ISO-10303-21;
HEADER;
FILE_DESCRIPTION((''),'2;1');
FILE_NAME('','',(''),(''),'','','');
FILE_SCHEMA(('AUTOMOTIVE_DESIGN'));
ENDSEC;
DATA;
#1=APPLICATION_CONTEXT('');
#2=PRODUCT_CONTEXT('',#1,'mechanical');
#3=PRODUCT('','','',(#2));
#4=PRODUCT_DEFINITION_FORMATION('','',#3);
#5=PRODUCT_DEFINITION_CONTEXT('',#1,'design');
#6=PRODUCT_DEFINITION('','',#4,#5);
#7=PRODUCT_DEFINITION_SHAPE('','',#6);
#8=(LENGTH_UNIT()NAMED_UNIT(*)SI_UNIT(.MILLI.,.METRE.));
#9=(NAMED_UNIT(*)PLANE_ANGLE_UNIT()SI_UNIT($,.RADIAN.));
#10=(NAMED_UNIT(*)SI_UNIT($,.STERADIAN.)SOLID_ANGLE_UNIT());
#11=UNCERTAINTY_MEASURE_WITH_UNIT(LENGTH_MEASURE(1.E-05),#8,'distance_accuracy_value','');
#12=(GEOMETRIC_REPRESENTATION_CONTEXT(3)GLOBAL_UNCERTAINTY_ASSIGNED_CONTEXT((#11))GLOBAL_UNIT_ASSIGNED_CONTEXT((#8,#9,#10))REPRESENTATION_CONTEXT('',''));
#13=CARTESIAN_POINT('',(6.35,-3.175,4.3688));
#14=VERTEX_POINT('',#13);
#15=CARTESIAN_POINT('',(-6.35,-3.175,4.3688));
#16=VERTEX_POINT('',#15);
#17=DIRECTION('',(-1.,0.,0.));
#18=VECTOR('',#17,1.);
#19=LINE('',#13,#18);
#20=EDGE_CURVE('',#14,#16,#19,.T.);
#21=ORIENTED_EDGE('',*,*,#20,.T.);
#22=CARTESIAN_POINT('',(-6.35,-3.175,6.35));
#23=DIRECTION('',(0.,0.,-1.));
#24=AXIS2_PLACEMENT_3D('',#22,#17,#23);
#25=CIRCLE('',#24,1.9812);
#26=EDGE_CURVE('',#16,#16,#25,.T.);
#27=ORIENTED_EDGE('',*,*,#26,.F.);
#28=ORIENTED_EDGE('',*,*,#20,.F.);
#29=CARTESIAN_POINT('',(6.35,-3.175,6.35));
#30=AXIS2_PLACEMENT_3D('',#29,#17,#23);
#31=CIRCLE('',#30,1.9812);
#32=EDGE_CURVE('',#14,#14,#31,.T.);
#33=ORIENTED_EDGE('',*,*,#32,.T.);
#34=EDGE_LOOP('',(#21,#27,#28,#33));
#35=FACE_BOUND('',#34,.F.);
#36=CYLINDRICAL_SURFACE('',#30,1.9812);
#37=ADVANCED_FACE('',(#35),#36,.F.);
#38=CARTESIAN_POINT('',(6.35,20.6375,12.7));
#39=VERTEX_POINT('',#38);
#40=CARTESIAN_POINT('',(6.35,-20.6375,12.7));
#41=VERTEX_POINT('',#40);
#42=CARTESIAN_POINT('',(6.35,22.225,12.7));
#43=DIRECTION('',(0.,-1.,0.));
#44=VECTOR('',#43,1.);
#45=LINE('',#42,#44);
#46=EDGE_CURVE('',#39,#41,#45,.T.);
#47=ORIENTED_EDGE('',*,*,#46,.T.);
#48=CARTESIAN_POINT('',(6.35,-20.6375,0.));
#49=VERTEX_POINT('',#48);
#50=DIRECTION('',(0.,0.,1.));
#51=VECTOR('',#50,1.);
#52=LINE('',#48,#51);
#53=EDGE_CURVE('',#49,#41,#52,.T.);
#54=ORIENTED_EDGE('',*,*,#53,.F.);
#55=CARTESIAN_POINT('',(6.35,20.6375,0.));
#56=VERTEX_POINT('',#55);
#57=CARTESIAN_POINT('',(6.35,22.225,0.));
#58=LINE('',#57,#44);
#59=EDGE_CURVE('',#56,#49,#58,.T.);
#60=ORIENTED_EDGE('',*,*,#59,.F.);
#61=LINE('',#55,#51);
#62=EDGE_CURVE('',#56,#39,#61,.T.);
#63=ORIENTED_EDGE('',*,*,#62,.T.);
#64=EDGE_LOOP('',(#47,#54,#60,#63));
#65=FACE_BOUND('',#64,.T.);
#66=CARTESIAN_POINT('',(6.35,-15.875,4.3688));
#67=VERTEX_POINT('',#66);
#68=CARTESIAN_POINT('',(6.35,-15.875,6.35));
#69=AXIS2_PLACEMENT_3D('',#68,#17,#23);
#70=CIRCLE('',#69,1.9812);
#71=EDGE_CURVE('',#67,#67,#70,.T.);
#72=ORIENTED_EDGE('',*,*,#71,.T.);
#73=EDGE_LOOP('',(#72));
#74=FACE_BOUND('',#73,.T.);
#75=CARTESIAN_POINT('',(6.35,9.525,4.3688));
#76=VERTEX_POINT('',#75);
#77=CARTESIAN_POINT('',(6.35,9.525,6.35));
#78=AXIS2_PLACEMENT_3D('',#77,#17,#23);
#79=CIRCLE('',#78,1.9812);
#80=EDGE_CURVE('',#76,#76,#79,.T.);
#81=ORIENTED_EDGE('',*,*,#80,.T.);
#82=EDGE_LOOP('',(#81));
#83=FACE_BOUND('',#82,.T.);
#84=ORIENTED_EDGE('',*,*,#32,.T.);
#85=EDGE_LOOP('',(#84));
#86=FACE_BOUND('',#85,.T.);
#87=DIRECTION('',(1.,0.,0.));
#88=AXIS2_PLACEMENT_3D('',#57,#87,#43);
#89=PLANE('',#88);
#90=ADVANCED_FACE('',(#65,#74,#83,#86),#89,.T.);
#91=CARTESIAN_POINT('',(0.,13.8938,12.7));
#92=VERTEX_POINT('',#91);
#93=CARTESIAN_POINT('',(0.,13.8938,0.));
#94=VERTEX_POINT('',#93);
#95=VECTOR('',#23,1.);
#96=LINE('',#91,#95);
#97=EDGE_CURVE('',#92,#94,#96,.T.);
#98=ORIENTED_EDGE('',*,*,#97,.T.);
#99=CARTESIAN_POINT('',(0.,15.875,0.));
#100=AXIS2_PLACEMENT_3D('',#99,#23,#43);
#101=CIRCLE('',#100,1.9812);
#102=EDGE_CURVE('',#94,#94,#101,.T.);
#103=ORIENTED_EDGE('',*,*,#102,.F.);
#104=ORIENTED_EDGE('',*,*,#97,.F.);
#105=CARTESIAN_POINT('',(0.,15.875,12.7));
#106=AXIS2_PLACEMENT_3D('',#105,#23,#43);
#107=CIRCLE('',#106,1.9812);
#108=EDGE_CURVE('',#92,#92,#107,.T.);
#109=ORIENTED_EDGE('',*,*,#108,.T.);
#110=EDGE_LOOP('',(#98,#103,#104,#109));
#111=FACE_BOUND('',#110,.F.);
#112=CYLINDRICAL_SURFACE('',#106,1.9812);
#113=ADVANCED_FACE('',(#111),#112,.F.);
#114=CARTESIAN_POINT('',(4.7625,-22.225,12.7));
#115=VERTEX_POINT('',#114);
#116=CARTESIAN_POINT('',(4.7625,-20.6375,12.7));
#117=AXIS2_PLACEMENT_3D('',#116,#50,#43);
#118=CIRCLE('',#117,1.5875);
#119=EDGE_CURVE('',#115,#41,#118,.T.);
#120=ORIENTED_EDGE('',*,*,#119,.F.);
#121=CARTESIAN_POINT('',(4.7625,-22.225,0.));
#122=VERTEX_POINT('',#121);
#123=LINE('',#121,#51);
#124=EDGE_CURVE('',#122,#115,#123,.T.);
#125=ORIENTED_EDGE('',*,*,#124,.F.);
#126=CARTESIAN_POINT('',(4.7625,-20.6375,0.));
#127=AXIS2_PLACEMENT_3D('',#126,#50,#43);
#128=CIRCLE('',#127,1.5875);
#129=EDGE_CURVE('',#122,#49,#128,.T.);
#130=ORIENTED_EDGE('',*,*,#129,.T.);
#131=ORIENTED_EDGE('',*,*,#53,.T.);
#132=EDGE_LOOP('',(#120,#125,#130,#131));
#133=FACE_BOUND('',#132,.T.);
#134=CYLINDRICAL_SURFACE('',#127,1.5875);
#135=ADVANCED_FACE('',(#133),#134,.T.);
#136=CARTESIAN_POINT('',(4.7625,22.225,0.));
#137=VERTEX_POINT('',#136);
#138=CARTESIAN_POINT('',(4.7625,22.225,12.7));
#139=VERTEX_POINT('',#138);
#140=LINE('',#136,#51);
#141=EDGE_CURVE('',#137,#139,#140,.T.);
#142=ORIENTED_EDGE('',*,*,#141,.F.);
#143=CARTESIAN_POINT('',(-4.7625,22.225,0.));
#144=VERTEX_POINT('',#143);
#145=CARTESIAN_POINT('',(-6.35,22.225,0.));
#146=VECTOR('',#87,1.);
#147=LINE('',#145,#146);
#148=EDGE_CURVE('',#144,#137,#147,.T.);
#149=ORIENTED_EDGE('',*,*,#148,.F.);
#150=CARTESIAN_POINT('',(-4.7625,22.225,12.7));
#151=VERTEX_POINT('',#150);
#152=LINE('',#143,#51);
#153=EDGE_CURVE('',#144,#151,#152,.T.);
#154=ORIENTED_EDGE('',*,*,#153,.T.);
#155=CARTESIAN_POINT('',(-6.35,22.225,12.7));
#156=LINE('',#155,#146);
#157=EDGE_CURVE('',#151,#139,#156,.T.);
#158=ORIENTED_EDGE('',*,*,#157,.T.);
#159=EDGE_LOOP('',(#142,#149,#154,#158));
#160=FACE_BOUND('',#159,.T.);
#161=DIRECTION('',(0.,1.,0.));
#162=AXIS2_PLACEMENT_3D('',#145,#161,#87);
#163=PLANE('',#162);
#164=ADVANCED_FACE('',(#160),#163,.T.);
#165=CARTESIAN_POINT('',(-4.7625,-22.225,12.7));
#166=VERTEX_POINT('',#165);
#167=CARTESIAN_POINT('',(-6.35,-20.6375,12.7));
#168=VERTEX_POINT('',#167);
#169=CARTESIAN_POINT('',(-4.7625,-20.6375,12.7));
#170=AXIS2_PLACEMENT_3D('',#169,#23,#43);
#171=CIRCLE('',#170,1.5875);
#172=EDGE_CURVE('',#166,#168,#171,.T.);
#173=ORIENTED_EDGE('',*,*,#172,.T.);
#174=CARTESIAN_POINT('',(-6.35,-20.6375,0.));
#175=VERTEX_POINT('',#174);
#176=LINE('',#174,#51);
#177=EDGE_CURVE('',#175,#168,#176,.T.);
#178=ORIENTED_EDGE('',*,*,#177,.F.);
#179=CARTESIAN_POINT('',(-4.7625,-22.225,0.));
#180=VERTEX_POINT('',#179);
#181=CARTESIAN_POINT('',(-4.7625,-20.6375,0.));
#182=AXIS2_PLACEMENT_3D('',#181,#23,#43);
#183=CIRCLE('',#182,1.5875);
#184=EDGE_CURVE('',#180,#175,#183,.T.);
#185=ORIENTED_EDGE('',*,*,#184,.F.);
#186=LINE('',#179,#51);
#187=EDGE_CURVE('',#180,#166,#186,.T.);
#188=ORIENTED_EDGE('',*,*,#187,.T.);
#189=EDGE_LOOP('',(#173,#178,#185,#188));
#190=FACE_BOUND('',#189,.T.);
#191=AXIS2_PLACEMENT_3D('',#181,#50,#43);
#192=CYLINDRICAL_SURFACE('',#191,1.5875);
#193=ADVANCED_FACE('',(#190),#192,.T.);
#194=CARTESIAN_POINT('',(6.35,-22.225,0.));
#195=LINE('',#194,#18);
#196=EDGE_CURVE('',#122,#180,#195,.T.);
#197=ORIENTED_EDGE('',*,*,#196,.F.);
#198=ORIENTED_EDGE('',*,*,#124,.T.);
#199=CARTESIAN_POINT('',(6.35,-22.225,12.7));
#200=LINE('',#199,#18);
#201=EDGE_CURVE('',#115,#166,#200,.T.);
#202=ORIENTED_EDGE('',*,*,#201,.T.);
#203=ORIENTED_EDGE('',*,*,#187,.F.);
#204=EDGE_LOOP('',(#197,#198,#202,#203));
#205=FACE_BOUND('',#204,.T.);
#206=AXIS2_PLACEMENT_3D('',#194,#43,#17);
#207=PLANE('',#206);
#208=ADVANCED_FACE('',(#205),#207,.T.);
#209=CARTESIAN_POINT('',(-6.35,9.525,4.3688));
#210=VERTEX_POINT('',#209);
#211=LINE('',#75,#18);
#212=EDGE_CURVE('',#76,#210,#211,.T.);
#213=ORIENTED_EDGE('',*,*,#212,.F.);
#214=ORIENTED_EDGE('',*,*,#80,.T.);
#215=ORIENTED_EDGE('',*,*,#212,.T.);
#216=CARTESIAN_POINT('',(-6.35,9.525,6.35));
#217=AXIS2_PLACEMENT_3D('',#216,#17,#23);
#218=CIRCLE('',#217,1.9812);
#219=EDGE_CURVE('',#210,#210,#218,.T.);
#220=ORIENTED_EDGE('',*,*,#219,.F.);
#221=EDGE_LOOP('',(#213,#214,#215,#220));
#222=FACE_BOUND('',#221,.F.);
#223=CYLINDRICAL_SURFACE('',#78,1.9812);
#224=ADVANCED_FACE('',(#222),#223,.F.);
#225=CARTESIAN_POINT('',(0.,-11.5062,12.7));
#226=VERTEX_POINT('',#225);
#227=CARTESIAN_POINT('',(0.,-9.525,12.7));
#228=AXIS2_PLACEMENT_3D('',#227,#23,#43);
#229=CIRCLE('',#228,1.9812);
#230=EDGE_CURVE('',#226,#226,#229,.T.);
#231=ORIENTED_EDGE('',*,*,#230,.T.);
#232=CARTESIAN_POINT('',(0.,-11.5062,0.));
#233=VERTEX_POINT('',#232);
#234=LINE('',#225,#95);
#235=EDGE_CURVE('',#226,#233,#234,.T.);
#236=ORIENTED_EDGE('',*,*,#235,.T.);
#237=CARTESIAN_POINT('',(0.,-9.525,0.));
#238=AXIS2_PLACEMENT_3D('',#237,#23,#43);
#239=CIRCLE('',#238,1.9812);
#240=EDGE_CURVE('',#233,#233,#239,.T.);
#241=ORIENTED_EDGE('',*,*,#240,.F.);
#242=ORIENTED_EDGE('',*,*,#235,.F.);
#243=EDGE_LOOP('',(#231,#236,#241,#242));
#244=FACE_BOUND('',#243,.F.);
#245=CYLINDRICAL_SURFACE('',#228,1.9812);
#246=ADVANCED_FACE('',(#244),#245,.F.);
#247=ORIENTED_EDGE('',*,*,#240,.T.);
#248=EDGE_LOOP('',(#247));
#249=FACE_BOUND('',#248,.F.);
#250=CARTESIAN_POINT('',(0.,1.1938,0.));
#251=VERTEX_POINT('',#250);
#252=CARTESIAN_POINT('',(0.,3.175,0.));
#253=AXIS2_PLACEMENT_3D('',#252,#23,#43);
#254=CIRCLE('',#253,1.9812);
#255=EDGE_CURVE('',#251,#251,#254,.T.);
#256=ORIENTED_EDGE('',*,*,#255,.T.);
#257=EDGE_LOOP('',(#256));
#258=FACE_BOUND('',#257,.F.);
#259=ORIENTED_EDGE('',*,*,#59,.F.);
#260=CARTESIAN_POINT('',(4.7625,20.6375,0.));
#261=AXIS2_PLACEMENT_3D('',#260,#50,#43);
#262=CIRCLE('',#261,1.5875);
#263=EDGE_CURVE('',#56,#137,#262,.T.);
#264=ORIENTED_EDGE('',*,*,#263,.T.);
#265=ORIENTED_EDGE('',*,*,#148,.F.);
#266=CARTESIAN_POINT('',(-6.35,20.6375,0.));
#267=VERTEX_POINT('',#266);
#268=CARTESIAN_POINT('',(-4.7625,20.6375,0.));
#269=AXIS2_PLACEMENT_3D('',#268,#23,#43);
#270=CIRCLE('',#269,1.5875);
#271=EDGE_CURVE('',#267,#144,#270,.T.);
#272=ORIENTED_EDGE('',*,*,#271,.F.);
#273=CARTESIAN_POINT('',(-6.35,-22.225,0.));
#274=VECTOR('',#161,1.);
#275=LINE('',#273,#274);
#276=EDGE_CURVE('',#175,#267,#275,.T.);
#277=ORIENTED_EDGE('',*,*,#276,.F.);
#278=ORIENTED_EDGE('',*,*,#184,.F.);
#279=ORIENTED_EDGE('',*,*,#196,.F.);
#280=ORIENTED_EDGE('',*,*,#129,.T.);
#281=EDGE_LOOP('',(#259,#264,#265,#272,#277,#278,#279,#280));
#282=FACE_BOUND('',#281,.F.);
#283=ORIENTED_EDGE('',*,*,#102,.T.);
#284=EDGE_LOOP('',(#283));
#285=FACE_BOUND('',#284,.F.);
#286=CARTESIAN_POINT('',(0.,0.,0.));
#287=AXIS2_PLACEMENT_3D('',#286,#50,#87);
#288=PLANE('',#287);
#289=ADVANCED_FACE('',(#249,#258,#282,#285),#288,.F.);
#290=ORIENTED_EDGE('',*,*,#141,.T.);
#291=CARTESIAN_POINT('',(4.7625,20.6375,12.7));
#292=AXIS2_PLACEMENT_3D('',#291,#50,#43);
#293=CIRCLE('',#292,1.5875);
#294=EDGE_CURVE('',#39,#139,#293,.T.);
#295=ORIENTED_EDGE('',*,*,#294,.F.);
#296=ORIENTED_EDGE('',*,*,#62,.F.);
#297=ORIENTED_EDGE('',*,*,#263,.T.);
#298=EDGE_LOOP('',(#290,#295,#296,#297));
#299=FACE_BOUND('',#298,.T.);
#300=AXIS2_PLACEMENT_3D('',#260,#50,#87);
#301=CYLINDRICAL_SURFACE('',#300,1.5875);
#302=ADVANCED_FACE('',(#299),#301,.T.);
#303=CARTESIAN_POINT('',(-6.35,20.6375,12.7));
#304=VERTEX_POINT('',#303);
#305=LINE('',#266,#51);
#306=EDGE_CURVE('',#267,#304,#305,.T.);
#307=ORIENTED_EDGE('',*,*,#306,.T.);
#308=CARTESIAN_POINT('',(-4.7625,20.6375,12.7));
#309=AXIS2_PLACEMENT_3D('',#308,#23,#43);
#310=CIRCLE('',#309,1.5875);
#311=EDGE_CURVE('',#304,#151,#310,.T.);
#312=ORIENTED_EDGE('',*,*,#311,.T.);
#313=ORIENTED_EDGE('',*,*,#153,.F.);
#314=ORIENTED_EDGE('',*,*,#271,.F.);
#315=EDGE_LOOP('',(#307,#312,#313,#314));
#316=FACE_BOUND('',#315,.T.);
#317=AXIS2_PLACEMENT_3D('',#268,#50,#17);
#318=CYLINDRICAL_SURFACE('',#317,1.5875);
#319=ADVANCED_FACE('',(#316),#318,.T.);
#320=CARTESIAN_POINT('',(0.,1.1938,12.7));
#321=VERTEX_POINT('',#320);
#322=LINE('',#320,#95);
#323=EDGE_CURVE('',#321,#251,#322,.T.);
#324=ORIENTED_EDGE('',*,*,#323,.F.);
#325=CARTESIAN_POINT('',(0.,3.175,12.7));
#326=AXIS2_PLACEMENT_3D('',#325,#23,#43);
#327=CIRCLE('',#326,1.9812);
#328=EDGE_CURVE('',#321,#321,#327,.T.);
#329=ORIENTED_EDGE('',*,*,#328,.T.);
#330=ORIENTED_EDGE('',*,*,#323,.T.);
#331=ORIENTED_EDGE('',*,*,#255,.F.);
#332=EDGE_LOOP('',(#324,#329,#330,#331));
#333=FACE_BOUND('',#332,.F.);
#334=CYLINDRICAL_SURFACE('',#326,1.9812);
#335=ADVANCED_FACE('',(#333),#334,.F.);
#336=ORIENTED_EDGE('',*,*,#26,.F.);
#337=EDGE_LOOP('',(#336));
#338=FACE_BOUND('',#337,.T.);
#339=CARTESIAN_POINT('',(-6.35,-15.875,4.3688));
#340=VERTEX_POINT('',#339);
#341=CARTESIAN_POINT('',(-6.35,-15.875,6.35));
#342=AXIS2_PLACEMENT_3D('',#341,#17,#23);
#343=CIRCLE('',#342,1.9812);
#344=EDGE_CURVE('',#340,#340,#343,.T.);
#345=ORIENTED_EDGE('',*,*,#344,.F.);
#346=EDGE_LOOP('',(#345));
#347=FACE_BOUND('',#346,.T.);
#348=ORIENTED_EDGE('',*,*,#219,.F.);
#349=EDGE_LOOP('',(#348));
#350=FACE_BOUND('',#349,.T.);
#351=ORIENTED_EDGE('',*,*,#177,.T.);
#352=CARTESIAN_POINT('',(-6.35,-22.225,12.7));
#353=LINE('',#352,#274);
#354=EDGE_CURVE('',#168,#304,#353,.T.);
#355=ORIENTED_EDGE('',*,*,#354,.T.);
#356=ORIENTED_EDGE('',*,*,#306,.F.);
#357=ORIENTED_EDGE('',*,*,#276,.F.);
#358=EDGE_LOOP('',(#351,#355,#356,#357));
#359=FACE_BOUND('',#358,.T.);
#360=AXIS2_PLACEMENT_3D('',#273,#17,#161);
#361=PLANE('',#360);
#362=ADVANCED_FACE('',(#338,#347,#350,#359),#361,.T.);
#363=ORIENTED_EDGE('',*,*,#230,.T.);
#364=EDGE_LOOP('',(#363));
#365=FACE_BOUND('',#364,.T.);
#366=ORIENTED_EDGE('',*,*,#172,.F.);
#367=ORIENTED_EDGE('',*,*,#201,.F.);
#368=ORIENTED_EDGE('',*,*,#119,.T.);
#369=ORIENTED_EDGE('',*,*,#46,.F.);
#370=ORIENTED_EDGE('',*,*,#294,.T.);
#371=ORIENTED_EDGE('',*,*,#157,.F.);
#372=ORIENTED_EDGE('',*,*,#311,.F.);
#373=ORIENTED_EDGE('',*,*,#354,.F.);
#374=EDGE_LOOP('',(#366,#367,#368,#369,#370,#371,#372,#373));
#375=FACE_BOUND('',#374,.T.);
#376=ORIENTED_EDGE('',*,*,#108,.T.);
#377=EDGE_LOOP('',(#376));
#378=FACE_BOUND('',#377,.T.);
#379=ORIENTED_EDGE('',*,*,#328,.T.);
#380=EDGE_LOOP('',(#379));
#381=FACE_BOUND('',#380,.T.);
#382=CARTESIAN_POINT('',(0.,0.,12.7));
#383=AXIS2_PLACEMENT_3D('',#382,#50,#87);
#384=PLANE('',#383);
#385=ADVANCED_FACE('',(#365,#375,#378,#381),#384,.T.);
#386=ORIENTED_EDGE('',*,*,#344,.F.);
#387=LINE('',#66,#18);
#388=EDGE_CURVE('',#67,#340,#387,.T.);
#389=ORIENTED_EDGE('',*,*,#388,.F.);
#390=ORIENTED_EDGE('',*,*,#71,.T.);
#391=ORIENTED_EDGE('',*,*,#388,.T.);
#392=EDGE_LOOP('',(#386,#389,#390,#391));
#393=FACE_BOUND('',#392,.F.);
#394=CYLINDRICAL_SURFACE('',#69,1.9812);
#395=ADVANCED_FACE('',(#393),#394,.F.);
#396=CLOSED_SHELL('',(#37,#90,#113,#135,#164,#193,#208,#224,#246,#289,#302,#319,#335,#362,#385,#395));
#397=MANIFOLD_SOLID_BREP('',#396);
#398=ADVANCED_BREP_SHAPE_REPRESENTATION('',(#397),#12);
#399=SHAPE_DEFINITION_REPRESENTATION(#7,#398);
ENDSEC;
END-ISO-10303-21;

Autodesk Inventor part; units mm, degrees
ref_plane "YZ Plane" through (0, 0, 0) normal (1, 0, 0) x (0, 1, 0)
ref_plane "XZ Plane" through (0, 0, 0) normal (0, 1, 0) x (-1, 0, 0)
ref_plane "XY Plane" through (0, 0, 0) normal (0, 0, 1) x (1, 0, 0)
sketch "Sketch1" plane through (0, 0, 0) normal (0, 0, 1) x (1, 0, 0)
  line L0 (6.35, -22.225) -> (-6.35, -22.225)
  line L1 (-6.35, -22.225) -> (-6.35, 22.225)
  line L2 (-6.35, 22.225) -> (6.35, 22.225)
  line L3 (6.35, 22.225) -> (6.35, -22.225)
  line L4 (6.35, -22.225) -> (-6.35, 22.225) construction
  line L5 (-6.35, -22.225) -> (6.35, 22.225) construction
  point P0 (0, 0)
  dimension "d0" = 12.7
  dimension "d6" = 44.45
extrude "Plate1" add sketch "Sketch1" along normal blind 12.7
sketch "Sketch2" plane through (6.35, -22.225, 0) normal (1, 0, 0) x (0, 0, -1)
  line L0 (0, 0) -> (-12.7, 0) projected
  line L1 (0, 0) -> (0, 44.45) projected
  point P0 (0, 22.225)
  point P1 (-6.35, 6.35)
  point P2 (-6.35, 19.05)
  point P3 (-6.35, 31.75)
  dimension "d2" = 6.35
  dimension "d3" = 12.7
  dimension "d4" = 12.7
  dimension "d5" = 6.35
hole "Hole1" at (6.35, -15.875, 6.35) at (6.35, -3.175, 6.35) at (6.35, 9.525, 6.35) direction (-1, 0, 0) diameter 3.9624 depth 12.7 tip angle 118 thread size "10-32 UNF" class "2B" standard "ANSI Unified Screw Threads"
sketch "Sketch3" plane through (0, 0, 12.7) normal (0, 0, 1) x (1, 0, 0)
  line L0 (-6.35, 22.225) -> (6.35, 22.225) projected
  point P0 (0, 0)
  point P1 (0, -9.525)
  point P2 (0, 3.175)
  point P3 (0, 15.875)
  dimension "d14" = 12.7
  dimension "d15" = 12.7
  dimension "d16" = 6.35
hole "Hole2" at (0, -9.525, 12.7) at (0, 3.175, 12.7) at (0, 15.875, 12.7) direction (0, 0, -1) diameter 3.9624 depth 12.7 tip angle 118 thread size "10-32 UNF" class "2B" standard "ANSI Unified Screw Threads"
fillet "Corner Round1" radius 1.5875 4 edges at (6.35, -22.225, 6.35) (-6.35, -22.225, 6.35) (6.35, 22.225, 6.35) (-6.35, 22.225, 6.35)
equation "\"d22\" = Thickness"
equation "\"d1\" = Thickness"
equation "\"BendRadius\" = Thickness"
equation "\"BendReliefWidth\" = Thickness"
equation "\"BendReliefDepth\" = 0.5 * Thickness"
equation "\"CornerReliefSize\" = 4 * Thickness"
equation "\"MinimumRemnant\" = 2 * Thickness"
equation "\"TransitionRadius\" = BendRadius"
equation "\"JacobiRadiusSize\" = BendRadius"
equation "\"GapSize\" = Thickness"
equation "\"Thickness\" = 12.7"
properties part number "PLATE,NUT-BLOCK,3-LONG" material "Aluminum 6061"
